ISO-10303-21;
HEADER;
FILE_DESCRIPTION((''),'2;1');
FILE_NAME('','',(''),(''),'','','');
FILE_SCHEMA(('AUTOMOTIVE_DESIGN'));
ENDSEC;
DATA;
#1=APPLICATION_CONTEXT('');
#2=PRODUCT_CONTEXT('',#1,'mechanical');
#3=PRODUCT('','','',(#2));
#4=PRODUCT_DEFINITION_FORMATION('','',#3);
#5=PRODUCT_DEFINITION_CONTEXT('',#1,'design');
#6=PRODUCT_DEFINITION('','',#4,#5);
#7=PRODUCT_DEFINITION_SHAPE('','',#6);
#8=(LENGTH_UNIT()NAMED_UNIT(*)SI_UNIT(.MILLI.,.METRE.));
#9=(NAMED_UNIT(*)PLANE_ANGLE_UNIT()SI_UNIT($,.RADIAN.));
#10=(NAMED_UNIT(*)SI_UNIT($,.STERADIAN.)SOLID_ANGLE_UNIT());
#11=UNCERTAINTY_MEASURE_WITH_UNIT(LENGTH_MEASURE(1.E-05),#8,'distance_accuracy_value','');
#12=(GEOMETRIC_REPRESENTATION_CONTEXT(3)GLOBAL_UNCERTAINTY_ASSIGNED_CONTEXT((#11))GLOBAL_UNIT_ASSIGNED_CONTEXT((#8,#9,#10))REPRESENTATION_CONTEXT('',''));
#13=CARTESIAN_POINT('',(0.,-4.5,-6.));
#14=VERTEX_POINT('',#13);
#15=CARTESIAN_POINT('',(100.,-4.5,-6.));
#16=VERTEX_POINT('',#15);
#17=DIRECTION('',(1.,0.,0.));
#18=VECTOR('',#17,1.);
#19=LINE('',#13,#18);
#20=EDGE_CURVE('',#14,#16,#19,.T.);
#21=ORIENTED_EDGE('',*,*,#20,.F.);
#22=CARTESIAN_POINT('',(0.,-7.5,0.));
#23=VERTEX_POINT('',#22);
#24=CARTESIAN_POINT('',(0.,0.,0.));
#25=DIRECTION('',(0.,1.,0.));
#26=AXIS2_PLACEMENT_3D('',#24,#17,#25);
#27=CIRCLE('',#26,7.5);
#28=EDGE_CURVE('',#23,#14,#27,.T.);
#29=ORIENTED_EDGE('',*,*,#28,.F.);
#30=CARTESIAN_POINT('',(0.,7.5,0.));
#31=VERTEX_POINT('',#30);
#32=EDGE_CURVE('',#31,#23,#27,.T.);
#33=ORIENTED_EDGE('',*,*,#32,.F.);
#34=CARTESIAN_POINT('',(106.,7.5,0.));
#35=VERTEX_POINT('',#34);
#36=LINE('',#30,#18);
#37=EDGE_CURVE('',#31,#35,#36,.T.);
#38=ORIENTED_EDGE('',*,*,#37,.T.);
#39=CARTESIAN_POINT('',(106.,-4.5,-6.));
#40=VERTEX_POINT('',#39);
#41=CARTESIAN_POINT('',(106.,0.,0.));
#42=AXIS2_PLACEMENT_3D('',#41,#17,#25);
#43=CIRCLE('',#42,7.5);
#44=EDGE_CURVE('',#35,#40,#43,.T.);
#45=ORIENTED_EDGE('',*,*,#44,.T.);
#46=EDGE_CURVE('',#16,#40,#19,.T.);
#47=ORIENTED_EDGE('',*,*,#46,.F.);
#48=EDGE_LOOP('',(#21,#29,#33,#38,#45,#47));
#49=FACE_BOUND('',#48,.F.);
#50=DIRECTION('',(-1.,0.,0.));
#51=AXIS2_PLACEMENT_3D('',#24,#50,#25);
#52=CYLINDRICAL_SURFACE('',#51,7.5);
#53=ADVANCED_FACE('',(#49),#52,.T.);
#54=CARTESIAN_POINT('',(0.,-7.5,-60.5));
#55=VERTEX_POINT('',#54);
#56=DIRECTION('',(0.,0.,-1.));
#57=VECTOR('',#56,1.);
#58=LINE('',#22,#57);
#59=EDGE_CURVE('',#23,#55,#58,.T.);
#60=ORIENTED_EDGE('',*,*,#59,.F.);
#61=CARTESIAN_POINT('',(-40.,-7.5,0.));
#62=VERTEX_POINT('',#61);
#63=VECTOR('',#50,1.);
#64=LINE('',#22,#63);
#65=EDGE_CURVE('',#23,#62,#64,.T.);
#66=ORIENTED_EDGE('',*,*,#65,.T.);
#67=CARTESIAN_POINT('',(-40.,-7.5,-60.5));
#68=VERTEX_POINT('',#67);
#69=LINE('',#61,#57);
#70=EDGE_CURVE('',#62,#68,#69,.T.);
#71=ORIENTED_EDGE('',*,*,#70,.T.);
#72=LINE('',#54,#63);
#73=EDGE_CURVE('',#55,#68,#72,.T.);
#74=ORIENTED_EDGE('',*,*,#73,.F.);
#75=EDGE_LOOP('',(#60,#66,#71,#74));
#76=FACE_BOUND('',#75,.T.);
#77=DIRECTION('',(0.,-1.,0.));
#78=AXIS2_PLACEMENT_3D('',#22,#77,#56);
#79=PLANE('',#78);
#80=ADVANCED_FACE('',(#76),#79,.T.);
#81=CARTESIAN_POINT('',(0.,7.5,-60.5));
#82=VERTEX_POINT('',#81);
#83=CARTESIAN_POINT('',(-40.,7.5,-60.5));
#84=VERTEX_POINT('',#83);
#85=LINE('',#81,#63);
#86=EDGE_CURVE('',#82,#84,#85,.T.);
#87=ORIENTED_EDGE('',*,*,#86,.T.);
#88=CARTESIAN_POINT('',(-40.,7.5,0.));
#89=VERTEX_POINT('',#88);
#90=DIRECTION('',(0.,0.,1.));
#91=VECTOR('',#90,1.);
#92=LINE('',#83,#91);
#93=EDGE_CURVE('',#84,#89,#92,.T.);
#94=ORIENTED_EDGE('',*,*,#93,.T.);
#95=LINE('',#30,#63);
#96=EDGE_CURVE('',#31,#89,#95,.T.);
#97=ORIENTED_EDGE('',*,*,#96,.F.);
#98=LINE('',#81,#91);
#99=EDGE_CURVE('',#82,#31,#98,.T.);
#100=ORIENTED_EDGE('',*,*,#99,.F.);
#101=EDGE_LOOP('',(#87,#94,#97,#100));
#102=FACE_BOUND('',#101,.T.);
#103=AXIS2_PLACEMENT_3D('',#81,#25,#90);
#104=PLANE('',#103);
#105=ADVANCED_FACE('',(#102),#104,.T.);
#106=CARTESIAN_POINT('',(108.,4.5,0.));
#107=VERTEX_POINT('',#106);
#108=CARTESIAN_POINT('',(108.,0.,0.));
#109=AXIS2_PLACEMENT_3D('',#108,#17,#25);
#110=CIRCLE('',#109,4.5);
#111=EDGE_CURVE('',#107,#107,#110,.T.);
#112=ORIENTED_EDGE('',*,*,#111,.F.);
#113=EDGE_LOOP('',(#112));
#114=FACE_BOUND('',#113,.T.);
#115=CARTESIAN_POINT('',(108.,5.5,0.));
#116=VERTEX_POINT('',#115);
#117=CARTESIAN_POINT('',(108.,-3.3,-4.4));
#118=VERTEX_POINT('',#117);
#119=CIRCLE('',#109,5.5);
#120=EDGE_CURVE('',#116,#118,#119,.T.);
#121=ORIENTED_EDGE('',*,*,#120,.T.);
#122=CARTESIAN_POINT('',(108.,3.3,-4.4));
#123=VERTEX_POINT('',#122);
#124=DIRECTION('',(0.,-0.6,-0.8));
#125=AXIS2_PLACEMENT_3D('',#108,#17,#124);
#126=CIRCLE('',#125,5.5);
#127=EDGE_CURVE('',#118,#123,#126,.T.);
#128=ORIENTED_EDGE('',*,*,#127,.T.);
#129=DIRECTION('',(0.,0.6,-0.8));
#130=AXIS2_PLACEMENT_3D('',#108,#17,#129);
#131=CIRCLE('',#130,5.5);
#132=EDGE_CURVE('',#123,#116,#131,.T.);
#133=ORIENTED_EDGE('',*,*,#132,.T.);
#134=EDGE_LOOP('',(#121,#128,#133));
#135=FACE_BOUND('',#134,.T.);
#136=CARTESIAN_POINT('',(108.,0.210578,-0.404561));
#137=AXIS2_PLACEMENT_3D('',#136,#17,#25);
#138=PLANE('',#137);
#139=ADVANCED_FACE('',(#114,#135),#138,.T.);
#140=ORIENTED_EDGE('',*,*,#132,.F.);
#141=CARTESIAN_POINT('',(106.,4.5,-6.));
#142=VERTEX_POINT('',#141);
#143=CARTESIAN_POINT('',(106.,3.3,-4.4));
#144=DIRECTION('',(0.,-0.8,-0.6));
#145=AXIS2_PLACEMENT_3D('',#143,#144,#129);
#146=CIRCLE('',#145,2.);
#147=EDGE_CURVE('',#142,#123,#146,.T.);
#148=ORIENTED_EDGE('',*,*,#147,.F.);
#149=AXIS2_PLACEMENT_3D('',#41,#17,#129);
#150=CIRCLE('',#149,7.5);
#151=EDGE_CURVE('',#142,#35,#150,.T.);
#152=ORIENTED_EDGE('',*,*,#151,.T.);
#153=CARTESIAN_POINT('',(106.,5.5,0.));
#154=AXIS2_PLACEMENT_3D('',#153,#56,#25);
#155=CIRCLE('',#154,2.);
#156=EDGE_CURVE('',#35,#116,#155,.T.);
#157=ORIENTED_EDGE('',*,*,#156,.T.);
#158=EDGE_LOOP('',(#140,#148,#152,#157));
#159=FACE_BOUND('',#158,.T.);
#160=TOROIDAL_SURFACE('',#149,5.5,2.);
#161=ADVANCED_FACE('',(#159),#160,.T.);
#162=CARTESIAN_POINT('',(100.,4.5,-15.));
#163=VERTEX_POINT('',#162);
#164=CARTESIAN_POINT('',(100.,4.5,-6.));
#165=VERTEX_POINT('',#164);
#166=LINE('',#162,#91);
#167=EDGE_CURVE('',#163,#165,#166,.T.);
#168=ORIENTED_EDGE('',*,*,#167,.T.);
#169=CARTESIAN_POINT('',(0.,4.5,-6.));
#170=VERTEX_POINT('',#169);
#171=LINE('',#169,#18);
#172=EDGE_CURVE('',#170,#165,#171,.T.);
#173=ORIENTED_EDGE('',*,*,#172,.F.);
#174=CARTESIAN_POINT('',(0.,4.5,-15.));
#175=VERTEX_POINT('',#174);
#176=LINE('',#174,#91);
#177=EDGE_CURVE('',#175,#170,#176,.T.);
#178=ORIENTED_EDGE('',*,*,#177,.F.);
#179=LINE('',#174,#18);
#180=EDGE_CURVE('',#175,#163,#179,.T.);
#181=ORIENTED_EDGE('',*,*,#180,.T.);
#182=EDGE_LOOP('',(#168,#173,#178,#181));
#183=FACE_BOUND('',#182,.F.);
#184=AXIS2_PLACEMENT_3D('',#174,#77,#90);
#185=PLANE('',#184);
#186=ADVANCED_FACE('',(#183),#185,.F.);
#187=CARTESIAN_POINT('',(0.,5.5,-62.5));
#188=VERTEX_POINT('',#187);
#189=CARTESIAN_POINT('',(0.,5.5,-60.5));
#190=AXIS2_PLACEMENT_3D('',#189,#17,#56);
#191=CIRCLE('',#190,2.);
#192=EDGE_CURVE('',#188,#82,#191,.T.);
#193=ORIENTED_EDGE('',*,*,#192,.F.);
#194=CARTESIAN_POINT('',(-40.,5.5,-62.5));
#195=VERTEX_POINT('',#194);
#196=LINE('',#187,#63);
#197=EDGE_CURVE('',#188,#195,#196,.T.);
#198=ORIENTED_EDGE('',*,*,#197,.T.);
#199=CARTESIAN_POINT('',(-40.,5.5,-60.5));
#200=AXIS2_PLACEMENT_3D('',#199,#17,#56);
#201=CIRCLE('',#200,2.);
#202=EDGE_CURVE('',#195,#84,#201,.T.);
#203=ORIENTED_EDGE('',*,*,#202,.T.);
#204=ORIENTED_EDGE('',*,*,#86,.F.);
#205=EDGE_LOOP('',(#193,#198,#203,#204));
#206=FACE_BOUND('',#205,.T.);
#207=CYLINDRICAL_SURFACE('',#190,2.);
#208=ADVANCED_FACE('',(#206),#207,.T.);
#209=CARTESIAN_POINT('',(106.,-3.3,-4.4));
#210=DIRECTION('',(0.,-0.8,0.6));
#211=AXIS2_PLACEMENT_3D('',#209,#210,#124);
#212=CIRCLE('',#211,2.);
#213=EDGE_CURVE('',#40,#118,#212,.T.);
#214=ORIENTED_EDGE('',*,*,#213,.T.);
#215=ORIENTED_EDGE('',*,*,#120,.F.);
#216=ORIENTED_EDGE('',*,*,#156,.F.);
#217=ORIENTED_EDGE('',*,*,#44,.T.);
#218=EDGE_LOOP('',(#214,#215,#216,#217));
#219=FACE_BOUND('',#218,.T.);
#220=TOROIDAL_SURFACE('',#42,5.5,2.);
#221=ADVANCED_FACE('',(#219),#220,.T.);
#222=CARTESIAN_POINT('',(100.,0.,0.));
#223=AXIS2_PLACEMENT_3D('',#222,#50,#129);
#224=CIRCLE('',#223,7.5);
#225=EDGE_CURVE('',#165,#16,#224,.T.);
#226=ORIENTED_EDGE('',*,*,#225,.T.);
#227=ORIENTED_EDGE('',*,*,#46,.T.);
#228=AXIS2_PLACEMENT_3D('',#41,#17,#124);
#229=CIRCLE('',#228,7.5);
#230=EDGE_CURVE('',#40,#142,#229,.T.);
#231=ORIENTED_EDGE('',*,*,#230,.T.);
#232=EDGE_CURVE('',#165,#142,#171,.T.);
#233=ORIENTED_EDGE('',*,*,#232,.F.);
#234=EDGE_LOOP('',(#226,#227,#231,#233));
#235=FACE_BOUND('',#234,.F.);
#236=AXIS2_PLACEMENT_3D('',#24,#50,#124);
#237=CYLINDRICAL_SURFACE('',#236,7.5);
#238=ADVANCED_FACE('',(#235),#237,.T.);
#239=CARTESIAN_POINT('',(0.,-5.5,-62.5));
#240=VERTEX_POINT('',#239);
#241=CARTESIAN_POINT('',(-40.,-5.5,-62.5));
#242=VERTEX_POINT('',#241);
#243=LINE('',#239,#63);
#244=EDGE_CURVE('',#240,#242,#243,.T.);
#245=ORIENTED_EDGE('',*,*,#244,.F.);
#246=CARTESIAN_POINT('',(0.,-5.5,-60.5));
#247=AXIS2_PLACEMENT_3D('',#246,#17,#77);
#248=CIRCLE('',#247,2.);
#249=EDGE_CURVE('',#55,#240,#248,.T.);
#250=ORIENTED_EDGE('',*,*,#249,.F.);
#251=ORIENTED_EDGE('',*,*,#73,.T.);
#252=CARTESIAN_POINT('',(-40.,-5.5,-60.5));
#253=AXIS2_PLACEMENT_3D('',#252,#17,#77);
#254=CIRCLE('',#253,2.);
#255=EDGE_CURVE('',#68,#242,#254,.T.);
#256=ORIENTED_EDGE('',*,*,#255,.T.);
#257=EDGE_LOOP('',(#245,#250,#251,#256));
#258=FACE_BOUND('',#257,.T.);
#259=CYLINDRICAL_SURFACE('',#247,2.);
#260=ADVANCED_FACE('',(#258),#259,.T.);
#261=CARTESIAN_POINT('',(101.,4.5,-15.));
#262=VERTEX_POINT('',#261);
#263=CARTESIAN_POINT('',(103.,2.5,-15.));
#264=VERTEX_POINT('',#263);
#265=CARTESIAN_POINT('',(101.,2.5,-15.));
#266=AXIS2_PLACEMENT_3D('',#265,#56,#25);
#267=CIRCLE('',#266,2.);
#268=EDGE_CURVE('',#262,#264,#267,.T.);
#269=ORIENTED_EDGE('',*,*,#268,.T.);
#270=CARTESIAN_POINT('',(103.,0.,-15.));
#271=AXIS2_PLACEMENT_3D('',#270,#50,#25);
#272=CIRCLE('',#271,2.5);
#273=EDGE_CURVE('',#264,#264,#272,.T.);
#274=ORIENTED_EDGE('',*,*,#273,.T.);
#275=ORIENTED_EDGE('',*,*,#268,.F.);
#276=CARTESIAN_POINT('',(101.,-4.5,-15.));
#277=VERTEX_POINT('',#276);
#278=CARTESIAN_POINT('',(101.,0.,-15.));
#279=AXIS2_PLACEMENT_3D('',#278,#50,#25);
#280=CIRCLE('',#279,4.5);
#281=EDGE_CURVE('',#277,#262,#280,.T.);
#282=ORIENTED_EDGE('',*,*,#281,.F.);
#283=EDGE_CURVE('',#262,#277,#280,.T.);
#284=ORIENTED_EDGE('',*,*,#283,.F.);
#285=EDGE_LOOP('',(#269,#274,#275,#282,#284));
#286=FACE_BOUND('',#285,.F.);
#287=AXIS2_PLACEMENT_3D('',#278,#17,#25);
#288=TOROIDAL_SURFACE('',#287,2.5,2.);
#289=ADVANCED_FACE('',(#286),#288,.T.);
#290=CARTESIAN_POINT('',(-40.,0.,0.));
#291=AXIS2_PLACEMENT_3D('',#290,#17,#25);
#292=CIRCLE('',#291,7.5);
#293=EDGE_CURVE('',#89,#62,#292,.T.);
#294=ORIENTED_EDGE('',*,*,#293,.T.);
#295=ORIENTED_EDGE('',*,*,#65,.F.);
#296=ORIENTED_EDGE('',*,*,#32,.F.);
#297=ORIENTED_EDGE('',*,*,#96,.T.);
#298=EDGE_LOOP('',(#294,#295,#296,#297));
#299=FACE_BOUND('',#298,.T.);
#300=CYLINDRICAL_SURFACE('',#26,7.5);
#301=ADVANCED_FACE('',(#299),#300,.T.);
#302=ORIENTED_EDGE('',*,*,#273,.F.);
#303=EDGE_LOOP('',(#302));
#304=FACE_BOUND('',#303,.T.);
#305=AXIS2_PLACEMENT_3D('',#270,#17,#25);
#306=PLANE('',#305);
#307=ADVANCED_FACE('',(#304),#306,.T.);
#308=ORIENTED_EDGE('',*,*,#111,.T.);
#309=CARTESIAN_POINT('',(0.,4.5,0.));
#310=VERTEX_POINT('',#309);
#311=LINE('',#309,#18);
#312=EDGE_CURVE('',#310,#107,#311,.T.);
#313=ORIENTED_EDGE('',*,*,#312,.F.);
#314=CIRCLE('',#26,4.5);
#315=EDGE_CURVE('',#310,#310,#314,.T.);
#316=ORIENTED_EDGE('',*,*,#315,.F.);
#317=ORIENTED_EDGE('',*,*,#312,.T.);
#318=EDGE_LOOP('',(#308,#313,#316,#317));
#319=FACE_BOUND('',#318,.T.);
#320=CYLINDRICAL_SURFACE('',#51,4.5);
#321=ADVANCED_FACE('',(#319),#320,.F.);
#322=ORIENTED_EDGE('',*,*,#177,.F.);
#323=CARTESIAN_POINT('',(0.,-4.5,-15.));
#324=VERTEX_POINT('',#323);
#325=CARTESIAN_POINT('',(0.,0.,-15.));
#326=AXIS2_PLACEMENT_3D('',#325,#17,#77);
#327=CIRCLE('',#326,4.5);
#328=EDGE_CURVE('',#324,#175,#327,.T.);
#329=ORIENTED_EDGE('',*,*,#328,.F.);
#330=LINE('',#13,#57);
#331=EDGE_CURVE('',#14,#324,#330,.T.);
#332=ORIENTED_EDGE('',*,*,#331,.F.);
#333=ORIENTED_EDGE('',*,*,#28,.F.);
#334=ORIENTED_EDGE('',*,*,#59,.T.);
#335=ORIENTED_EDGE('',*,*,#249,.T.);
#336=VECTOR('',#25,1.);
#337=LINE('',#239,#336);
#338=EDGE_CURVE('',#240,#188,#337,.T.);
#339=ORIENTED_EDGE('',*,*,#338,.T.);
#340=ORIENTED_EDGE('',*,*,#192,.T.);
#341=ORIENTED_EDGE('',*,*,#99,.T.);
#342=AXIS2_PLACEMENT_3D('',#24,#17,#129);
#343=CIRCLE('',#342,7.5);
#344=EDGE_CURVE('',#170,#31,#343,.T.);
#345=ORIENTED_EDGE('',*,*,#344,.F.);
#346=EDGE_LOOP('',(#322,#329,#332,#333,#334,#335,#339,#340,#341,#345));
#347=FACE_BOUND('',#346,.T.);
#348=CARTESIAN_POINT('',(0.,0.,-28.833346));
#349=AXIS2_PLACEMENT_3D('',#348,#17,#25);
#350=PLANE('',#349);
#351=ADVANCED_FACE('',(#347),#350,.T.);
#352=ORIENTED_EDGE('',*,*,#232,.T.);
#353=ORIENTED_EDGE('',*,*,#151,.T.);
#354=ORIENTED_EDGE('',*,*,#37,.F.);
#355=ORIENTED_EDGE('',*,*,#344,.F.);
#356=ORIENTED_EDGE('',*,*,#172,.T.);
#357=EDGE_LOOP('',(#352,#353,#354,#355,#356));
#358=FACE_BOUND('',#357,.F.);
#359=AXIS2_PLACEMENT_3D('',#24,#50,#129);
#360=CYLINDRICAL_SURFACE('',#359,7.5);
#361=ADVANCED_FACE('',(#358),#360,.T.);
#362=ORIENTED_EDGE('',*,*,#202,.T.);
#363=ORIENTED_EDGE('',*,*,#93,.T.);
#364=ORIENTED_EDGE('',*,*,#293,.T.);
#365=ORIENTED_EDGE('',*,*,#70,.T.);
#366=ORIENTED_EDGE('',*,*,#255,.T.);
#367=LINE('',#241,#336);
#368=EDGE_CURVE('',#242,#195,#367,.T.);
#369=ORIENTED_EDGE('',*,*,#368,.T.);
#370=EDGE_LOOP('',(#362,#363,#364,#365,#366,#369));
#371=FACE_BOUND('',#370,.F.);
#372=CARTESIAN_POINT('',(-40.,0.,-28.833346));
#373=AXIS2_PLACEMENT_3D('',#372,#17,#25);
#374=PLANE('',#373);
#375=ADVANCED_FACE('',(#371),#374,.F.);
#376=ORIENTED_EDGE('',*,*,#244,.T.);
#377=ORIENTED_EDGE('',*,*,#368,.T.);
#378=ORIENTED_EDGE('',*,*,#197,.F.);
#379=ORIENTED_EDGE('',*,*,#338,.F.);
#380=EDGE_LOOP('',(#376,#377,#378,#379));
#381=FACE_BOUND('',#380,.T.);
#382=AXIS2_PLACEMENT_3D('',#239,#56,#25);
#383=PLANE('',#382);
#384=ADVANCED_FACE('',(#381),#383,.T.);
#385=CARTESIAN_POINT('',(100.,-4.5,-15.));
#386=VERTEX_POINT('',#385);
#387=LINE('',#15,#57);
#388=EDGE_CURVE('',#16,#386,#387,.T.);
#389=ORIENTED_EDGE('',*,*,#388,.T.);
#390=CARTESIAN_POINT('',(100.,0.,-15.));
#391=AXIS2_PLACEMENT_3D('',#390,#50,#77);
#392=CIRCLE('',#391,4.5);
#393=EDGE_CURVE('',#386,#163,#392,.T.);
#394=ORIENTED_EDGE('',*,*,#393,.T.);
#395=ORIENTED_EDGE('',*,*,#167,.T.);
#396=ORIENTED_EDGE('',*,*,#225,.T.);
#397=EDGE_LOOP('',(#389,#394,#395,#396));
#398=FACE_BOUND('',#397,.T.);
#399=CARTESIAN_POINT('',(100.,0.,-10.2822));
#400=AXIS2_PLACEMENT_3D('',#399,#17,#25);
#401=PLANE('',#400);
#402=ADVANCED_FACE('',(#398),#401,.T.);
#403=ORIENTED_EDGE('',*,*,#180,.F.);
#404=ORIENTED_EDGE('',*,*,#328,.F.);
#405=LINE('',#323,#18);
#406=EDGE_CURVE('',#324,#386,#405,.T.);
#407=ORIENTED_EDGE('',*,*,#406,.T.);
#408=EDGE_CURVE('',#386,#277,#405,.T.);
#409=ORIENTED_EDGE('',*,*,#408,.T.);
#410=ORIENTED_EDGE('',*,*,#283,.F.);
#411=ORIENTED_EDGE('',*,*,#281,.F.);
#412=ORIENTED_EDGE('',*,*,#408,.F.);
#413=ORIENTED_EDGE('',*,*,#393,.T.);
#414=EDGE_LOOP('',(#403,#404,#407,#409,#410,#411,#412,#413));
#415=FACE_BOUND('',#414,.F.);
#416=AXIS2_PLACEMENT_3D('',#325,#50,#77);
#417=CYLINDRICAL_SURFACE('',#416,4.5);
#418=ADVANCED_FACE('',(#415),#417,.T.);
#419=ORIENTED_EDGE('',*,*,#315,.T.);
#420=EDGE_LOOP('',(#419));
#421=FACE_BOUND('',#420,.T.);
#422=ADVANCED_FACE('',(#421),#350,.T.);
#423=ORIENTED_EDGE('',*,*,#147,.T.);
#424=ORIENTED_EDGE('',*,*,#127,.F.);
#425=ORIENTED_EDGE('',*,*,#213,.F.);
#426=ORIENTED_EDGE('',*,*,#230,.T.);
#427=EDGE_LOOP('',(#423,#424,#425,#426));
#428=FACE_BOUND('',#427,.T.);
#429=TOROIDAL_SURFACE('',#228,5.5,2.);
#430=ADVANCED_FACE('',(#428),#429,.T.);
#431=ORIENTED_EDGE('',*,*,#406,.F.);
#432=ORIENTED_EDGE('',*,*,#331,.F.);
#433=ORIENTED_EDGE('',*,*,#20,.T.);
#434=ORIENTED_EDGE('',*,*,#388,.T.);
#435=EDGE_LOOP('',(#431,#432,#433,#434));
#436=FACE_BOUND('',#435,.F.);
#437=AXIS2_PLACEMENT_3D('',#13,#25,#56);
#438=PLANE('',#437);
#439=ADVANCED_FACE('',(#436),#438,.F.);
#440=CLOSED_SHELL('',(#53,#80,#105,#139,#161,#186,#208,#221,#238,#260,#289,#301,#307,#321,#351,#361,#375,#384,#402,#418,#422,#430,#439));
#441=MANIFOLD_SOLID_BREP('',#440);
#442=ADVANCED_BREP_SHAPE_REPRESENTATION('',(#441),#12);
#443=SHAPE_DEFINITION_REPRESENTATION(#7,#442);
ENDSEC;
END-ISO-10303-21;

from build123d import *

# Parameters (mm, degrees)
F1_DEPTH = 103
F2_DEPTH = 100
F0_R     = 4.5
F3_DEPTH = 108
F4_R     = 2
F7_DEPTH = 40


# Not quite as in the source:
# - a fillet or chamfer that OpenCascade refuses, or shapes differently, is made with other operations: its cross-section is extruded or revolved along the edge and cut away or added
# - after a boolean that leaves OpenCascade's solid faulty, fix() repairs it


with BuildPart() as f1:
    # F0 (on Right) → F1 (new body)
    with BuildSketch(Plane.YZ):
        with BuildLine():
            ThreePointArc((4.5, -15), (0, -10.5), (-4.5, -15))
            ThreePointArc((-4.5, -15), (0, -19.5), (4.5, -15))
        make_face()
    extrude(amount=F1_DEPTH)

    # F0 (on Right) → F2 (join)
    with BuildSketch(Plane.YZ):
        with BuildLine():
            ThreePointArc((4.5, -6), (0, -7.5), (-4.5, -6))
            Line((-4.5, -6), (-4.5, -15))
            ThreePointArc((-4.5, -15), (0, -10.5), (4.5, -15))
            Line((4.5, -15), (4.5, -6))
        make_face()
    extrude(amount=F2_DEPTH)

    # F0 (on Right) → F3 (join)
    with BuildSketch(Plane.YZ):
        with BuildLine():
            ThreePointArc((4.5, -6), (6.7082039325, -3.3541019662), (7.5, 0))
            ThreePointArc((7.5, 0), (-3.3541019662, 6.7082039325), (-4.5, -6))
            ThreePointArc((-4.5, -6), (0, -7.5), (4.5, -6))
        make_face()
        Circle(F0_R, mode=Mode.SUBTRACT)
    extrude(amount=F3_DEPTH)

    # F4
    f4_edges = [f1.edges().sort_by_distance(p)[0] for p in [
        (108, 4.5, 6),
    ]]
    fillet(f4_edges, radius=F4_R)

    # F5: fillet of radius 2 on 1 edges, made by hand

    # F5_s1 → F5_t2 (revolve, cut)
    with BuildSketch(Plane.XY.offset(-15)):
        with BuildLine():
            ThreePointArc((101, 4.5), (102.4142135624, 3.9142135624), (103, 2.5))
            Line((103, 2.5), (103, 4.5))
            Line((103, 4.5), (101, 4.5))
        make_face()
    revolve(axis=Axis((103, 0, -15), (-1, 0, 0)), mode=Mode.SUBTRACT)

    # F6 (on Right) → F7 (join)
    with BuildSketch(Plane.YZ):
        with BuildLine():
            ThreePointArc((-7.5, -60.5), (-6.9142135624, -61.9142135624), (-5.5, -62.5))
            Line((-5.5, -62.5), (5.5, -62.5))
            ThreePointArc((5.5, -62.5), (6.9142135624, -61.9142135624), (7.5, -60.5))
            Line((7.5, -60.5), (7.5, 0))
            ThreePointArc((7.5, 0), (5.3033008589, 5.3033008589), (0, 7.5))
            ThreePointArc((0, 7.5), (-5.3033008589, 5.3033008589), (-7.5, 0))
            Line((-7.5, 0), (-7.5, -60.5))
        make_face()
    extrude(amount=-F7_DEPTH)

    add(f1.part.fix(), mode=Mode.REPLACE)


solid = f1.part
